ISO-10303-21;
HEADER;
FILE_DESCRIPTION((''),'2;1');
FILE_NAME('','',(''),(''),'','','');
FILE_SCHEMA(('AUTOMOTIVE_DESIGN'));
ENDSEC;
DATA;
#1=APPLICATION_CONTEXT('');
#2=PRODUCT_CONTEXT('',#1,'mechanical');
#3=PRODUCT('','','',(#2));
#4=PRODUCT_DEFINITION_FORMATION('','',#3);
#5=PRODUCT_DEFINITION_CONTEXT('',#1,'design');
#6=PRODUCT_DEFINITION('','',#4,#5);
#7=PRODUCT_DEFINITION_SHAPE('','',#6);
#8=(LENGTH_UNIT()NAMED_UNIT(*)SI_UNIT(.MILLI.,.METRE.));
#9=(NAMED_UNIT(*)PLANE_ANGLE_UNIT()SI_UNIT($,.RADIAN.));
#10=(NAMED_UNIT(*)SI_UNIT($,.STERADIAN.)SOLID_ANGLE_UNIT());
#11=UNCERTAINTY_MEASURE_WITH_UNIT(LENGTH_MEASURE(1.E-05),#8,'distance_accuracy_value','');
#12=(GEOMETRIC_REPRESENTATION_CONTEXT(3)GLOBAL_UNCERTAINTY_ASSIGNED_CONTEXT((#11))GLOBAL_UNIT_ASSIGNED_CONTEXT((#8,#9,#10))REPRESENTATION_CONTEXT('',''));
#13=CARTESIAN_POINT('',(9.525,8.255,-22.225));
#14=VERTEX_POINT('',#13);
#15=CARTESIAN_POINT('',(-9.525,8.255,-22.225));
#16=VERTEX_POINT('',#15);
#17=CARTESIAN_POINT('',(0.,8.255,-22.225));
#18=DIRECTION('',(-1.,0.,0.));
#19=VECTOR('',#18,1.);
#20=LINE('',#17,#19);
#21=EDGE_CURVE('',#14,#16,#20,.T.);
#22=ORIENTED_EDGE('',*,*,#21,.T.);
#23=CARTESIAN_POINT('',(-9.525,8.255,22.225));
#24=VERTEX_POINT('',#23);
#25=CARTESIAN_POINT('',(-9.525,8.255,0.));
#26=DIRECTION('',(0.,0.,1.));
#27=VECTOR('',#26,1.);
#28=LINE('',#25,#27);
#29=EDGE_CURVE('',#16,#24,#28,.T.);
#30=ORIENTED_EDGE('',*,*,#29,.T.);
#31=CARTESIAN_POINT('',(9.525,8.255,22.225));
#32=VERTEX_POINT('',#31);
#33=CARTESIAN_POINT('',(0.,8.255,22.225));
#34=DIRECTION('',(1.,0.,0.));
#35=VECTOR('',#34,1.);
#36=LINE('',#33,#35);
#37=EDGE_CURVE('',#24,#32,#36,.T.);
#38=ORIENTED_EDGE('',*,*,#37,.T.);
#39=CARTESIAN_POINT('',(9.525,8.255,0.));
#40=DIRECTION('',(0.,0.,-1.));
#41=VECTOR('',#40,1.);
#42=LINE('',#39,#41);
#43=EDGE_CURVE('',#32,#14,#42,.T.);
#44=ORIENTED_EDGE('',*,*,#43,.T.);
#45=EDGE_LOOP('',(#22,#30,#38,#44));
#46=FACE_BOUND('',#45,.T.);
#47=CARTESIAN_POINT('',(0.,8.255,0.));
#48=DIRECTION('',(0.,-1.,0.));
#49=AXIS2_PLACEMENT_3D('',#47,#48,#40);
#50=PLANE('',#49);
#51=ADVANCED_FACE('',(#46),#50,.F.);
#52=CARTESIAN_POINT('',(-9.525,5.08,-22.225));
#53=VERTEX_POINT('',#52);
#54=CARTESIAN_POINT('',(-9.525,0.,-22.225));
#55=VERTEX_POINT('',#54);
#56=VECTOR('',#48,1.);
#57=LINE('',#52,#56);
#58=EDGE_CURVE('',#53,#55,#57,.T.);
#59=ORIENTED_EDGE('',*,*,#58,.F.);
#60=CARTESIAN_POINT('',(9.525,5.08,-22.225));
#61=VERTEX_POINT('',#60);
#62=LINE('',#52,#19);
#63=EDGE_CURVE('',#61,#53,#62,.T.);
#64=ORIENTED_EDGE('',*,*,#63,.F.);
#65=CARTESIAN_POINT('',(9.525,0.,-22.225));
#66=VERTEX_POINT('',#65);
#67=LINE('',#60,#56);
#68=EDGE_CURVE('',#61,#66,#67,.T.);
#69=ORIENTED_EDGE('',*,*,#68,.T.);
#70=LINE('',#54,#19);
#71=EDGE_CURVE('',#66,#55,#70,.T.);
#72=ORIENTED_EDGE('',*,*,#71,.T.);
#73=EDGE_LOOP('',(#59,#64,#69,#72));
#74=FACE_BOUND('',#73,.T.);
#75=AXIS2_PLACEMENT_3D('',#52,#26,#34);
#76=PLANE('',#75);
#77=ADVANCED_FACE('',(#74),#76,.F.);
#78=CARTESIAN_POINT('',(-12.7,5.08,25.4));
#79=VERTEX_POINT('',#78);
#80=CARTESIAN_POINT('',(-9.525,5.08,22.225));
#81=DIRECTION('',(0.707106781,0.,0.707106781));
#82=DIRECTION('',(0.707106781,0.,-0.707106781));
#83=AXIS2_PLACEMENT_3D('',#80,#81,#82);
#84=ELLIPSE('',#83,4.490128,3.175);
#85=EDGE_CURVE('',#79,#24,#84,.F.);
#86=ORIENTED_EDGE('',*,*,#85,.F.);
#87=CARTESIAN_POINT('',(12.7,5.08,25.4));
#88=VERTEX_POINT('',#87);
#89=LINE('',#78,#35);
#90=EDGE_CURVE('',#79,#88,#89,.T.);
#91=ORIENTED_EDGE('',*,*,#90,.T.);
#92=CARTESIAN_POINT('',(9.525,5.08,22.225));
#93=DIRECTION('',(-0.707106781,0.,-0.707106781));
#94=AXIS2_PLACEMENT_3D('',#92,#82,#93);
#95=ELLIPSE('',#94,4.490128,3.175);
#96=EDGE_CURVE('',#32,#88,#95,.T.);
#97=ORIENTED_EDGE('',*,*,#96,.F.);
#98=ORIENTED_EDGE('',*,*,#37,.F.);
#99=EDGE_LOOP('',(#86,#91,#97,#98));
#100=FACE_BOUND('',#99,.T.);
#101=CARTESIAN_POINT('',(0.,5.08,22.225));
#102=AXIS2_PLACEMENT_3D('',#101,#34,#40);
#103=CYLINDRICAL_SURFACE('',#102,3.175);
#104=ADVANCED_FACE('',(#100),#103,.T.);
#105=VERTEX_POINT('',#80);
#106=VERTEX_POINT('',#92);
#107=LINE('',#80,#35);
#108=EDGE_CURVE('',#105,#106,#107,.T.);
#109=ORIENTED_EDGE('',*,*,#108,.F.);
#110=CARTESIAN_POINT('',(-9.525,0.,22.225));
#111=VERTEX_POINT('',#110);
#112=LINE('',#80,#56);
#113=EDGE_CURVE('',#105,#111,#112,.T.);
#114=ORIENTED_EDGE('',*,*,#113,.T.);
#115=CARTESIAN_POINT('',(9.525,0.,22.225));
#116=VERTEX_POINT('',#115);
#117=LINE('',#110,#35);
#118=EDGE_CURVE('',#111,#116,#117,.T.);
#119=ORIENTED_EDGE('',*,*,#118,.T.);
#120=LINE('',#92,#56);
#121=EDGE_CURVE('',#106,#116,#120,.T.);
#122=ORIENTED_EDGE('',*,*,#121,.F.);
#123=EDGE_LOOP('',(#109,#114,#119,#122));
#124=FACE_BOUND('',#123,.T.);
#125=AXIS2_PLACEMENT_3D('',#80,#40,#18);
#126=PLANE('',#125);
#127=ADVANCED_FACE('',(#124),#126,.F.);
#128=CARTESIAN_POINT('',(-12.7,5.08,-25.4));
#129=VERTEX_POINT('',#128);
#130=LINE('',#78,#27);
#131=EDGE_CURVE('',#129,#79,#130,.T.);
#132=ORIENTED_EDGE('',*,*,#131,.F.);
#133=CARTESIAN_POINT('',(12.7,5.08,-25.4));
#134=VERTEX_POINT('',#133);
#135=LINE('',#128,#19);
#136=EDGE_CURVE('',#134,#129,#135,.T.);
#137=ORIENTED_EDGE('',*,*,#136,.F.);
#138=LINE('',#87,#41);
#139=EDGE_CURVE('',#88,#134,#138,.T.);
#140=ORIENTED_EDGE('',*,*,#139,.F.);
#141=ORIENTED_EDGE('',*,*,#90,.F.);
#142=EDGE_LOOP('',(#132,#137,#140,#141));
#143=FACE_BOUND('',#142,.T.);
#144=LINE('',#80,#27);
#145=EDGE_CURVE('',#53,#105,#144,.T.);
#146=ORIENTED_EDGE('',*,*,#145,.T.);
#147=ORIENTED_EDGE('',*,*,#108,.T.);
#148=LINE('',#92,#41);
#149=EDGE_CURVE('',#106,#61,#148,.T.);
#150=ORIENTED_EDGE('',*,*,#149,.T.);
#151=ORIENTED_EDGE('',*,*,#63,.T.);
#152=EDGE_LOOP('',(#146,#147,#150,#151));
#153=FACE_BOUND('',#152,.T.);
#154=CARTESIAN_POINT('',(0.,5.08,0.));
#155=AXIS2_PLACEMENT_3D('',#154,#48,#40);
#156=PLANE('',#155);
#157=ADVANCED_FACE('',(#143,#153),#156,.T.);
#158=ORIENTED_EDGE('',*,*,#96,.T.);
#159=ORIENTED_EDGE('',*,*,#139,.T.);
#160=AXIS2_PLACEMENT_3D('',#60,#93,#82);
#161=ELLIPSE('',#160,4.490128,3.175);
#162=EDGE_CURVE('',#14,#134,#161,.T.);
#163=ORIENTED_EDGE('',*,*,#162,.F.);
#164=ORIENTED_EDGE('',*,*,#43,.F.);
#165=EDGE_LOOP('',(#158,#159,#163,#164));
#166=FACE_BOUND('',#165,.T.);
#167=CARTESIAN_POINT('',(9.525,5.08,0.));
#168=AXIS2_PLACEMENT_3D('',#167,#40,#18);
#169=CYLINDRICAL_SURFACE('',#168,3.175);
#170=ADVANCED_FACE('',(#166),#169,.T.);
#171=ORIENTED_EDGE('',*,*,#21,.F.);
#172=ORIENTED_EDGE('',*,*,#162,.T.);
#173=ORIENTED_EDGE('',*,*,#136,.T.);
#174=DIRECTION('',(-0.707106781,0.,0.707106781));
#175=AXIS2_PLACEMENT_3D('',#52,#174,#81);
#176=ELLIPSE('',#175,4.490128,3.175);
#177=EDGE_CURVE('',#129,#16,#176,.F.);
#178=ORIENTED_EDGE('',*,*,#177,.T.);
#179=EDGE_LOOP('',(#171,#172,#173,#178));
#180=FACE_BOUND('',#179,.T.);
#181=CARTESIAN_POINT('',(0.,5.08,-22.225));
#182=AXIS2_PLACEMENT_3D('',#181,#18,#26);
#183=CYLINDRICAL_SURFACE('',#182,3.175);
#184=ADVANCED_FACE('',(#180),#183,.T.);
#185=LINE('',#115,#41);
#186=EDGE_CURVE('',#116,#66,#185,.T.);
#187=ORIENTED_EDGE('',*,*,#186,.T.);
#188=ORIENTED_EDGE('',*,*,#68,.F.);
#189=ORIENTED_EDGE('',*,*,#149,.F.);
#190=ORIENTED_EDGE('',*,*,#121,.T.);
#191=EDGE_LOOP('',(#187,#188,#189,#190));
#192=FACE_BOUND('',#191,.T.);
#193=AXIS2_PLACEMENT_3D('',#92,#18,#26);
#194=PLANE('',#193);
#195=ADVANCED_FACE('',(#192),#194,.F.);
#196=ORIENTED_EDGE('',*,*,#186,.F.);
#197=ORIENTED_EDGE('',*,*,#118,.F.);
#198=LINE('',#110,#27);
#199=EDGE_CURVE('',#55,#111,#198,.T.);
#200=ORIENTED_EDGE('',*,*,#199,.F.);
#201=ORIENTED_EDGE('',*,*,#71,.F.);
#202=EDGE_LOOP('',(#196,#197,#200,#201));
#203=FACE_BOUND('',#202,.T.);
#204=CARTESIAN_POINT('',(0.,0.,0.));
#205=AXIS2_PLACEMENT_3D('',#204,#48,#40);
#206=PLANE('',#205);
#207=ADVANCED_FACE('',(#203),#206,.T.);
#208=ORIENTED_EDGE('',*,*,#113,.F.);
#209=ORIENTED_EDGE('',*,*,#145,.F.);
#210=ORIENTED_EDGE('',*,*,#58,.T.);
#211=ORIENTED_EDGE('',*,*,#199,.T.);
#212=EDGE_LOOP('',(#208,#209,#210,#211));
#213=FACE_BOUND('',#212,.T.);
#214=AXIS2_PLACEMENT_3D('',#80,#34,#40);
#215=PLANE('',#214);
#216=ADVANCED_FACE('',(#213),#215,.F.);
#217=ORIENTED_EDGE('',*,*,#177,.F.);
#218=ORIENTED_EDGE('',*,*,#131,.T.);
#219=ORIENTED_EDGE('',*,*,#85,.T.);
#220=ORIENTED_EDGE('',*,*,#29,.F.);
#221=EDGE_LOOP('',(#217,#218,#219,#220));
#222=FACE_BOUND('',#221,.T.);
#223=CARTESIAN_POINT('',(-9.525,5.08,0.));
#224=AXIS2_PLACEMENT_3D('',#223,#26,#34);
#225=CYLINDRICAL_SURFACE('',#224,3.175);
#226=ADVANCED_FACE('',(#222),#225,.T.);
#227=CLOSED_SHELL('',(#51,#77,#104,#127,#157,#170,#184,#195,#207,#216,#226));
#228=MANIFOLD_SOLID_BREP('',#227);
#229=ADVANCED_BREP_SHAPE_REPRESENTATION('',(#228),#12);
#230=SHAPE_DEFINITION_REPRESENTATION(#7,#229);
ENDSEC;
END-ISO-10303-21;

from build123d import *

# Parameters (mm, degrees)
SKETCH1_W           = 19.05
SKETCH1_H           = 44.45
BOSS_EXTRUDE1_DEPTH = 5.08
SKETCH2_W           = 25.4
SKETCH2_H           = 50.8
BOSS_EXTRUDE2_DEPTH = 3.175
FILLET1_R           = 3.175


with BuildPart() as part:
    # Sketch1 → Boss-Extrude1 (new body)
    with BuildSketch(Plane(origin=(0, 0, 0), x_dir=(1, 0, 0), z_dir=(0, 1, 0))):
        Rectangle(SKETCH1_W, SKETCH1_H)
    extrude(amount=BOSS_EXTRUDE1_DEPTH)

    # Sketch2 → Boss-Extrude2 (add)
    with BuildSketch(Plane(origin=(0, 5.08, 0), x_dir=(1, 0, 0), z_dir=(0, 1, 0))):
        Rectangle(SKETCH2_W, SKETCH2_H)
    extrude(amount=BOSS_EXTRUDE2_DEPTH)

    # Fillet1
    fillet1_edges = [part.edges().sort_by_distance(p)[0] for p in [
        (0, 8.255, -25.4),
        (-12.7, 8.255, 0),
        (0, 8.255, 25.4),
        (12.7, 8.255, 0),
    ]]
    fillet(fillet1_edges, radius=FILLET1_R - 0.0001)  # a hair under: the kernel refuses the full size


solid = part.part
